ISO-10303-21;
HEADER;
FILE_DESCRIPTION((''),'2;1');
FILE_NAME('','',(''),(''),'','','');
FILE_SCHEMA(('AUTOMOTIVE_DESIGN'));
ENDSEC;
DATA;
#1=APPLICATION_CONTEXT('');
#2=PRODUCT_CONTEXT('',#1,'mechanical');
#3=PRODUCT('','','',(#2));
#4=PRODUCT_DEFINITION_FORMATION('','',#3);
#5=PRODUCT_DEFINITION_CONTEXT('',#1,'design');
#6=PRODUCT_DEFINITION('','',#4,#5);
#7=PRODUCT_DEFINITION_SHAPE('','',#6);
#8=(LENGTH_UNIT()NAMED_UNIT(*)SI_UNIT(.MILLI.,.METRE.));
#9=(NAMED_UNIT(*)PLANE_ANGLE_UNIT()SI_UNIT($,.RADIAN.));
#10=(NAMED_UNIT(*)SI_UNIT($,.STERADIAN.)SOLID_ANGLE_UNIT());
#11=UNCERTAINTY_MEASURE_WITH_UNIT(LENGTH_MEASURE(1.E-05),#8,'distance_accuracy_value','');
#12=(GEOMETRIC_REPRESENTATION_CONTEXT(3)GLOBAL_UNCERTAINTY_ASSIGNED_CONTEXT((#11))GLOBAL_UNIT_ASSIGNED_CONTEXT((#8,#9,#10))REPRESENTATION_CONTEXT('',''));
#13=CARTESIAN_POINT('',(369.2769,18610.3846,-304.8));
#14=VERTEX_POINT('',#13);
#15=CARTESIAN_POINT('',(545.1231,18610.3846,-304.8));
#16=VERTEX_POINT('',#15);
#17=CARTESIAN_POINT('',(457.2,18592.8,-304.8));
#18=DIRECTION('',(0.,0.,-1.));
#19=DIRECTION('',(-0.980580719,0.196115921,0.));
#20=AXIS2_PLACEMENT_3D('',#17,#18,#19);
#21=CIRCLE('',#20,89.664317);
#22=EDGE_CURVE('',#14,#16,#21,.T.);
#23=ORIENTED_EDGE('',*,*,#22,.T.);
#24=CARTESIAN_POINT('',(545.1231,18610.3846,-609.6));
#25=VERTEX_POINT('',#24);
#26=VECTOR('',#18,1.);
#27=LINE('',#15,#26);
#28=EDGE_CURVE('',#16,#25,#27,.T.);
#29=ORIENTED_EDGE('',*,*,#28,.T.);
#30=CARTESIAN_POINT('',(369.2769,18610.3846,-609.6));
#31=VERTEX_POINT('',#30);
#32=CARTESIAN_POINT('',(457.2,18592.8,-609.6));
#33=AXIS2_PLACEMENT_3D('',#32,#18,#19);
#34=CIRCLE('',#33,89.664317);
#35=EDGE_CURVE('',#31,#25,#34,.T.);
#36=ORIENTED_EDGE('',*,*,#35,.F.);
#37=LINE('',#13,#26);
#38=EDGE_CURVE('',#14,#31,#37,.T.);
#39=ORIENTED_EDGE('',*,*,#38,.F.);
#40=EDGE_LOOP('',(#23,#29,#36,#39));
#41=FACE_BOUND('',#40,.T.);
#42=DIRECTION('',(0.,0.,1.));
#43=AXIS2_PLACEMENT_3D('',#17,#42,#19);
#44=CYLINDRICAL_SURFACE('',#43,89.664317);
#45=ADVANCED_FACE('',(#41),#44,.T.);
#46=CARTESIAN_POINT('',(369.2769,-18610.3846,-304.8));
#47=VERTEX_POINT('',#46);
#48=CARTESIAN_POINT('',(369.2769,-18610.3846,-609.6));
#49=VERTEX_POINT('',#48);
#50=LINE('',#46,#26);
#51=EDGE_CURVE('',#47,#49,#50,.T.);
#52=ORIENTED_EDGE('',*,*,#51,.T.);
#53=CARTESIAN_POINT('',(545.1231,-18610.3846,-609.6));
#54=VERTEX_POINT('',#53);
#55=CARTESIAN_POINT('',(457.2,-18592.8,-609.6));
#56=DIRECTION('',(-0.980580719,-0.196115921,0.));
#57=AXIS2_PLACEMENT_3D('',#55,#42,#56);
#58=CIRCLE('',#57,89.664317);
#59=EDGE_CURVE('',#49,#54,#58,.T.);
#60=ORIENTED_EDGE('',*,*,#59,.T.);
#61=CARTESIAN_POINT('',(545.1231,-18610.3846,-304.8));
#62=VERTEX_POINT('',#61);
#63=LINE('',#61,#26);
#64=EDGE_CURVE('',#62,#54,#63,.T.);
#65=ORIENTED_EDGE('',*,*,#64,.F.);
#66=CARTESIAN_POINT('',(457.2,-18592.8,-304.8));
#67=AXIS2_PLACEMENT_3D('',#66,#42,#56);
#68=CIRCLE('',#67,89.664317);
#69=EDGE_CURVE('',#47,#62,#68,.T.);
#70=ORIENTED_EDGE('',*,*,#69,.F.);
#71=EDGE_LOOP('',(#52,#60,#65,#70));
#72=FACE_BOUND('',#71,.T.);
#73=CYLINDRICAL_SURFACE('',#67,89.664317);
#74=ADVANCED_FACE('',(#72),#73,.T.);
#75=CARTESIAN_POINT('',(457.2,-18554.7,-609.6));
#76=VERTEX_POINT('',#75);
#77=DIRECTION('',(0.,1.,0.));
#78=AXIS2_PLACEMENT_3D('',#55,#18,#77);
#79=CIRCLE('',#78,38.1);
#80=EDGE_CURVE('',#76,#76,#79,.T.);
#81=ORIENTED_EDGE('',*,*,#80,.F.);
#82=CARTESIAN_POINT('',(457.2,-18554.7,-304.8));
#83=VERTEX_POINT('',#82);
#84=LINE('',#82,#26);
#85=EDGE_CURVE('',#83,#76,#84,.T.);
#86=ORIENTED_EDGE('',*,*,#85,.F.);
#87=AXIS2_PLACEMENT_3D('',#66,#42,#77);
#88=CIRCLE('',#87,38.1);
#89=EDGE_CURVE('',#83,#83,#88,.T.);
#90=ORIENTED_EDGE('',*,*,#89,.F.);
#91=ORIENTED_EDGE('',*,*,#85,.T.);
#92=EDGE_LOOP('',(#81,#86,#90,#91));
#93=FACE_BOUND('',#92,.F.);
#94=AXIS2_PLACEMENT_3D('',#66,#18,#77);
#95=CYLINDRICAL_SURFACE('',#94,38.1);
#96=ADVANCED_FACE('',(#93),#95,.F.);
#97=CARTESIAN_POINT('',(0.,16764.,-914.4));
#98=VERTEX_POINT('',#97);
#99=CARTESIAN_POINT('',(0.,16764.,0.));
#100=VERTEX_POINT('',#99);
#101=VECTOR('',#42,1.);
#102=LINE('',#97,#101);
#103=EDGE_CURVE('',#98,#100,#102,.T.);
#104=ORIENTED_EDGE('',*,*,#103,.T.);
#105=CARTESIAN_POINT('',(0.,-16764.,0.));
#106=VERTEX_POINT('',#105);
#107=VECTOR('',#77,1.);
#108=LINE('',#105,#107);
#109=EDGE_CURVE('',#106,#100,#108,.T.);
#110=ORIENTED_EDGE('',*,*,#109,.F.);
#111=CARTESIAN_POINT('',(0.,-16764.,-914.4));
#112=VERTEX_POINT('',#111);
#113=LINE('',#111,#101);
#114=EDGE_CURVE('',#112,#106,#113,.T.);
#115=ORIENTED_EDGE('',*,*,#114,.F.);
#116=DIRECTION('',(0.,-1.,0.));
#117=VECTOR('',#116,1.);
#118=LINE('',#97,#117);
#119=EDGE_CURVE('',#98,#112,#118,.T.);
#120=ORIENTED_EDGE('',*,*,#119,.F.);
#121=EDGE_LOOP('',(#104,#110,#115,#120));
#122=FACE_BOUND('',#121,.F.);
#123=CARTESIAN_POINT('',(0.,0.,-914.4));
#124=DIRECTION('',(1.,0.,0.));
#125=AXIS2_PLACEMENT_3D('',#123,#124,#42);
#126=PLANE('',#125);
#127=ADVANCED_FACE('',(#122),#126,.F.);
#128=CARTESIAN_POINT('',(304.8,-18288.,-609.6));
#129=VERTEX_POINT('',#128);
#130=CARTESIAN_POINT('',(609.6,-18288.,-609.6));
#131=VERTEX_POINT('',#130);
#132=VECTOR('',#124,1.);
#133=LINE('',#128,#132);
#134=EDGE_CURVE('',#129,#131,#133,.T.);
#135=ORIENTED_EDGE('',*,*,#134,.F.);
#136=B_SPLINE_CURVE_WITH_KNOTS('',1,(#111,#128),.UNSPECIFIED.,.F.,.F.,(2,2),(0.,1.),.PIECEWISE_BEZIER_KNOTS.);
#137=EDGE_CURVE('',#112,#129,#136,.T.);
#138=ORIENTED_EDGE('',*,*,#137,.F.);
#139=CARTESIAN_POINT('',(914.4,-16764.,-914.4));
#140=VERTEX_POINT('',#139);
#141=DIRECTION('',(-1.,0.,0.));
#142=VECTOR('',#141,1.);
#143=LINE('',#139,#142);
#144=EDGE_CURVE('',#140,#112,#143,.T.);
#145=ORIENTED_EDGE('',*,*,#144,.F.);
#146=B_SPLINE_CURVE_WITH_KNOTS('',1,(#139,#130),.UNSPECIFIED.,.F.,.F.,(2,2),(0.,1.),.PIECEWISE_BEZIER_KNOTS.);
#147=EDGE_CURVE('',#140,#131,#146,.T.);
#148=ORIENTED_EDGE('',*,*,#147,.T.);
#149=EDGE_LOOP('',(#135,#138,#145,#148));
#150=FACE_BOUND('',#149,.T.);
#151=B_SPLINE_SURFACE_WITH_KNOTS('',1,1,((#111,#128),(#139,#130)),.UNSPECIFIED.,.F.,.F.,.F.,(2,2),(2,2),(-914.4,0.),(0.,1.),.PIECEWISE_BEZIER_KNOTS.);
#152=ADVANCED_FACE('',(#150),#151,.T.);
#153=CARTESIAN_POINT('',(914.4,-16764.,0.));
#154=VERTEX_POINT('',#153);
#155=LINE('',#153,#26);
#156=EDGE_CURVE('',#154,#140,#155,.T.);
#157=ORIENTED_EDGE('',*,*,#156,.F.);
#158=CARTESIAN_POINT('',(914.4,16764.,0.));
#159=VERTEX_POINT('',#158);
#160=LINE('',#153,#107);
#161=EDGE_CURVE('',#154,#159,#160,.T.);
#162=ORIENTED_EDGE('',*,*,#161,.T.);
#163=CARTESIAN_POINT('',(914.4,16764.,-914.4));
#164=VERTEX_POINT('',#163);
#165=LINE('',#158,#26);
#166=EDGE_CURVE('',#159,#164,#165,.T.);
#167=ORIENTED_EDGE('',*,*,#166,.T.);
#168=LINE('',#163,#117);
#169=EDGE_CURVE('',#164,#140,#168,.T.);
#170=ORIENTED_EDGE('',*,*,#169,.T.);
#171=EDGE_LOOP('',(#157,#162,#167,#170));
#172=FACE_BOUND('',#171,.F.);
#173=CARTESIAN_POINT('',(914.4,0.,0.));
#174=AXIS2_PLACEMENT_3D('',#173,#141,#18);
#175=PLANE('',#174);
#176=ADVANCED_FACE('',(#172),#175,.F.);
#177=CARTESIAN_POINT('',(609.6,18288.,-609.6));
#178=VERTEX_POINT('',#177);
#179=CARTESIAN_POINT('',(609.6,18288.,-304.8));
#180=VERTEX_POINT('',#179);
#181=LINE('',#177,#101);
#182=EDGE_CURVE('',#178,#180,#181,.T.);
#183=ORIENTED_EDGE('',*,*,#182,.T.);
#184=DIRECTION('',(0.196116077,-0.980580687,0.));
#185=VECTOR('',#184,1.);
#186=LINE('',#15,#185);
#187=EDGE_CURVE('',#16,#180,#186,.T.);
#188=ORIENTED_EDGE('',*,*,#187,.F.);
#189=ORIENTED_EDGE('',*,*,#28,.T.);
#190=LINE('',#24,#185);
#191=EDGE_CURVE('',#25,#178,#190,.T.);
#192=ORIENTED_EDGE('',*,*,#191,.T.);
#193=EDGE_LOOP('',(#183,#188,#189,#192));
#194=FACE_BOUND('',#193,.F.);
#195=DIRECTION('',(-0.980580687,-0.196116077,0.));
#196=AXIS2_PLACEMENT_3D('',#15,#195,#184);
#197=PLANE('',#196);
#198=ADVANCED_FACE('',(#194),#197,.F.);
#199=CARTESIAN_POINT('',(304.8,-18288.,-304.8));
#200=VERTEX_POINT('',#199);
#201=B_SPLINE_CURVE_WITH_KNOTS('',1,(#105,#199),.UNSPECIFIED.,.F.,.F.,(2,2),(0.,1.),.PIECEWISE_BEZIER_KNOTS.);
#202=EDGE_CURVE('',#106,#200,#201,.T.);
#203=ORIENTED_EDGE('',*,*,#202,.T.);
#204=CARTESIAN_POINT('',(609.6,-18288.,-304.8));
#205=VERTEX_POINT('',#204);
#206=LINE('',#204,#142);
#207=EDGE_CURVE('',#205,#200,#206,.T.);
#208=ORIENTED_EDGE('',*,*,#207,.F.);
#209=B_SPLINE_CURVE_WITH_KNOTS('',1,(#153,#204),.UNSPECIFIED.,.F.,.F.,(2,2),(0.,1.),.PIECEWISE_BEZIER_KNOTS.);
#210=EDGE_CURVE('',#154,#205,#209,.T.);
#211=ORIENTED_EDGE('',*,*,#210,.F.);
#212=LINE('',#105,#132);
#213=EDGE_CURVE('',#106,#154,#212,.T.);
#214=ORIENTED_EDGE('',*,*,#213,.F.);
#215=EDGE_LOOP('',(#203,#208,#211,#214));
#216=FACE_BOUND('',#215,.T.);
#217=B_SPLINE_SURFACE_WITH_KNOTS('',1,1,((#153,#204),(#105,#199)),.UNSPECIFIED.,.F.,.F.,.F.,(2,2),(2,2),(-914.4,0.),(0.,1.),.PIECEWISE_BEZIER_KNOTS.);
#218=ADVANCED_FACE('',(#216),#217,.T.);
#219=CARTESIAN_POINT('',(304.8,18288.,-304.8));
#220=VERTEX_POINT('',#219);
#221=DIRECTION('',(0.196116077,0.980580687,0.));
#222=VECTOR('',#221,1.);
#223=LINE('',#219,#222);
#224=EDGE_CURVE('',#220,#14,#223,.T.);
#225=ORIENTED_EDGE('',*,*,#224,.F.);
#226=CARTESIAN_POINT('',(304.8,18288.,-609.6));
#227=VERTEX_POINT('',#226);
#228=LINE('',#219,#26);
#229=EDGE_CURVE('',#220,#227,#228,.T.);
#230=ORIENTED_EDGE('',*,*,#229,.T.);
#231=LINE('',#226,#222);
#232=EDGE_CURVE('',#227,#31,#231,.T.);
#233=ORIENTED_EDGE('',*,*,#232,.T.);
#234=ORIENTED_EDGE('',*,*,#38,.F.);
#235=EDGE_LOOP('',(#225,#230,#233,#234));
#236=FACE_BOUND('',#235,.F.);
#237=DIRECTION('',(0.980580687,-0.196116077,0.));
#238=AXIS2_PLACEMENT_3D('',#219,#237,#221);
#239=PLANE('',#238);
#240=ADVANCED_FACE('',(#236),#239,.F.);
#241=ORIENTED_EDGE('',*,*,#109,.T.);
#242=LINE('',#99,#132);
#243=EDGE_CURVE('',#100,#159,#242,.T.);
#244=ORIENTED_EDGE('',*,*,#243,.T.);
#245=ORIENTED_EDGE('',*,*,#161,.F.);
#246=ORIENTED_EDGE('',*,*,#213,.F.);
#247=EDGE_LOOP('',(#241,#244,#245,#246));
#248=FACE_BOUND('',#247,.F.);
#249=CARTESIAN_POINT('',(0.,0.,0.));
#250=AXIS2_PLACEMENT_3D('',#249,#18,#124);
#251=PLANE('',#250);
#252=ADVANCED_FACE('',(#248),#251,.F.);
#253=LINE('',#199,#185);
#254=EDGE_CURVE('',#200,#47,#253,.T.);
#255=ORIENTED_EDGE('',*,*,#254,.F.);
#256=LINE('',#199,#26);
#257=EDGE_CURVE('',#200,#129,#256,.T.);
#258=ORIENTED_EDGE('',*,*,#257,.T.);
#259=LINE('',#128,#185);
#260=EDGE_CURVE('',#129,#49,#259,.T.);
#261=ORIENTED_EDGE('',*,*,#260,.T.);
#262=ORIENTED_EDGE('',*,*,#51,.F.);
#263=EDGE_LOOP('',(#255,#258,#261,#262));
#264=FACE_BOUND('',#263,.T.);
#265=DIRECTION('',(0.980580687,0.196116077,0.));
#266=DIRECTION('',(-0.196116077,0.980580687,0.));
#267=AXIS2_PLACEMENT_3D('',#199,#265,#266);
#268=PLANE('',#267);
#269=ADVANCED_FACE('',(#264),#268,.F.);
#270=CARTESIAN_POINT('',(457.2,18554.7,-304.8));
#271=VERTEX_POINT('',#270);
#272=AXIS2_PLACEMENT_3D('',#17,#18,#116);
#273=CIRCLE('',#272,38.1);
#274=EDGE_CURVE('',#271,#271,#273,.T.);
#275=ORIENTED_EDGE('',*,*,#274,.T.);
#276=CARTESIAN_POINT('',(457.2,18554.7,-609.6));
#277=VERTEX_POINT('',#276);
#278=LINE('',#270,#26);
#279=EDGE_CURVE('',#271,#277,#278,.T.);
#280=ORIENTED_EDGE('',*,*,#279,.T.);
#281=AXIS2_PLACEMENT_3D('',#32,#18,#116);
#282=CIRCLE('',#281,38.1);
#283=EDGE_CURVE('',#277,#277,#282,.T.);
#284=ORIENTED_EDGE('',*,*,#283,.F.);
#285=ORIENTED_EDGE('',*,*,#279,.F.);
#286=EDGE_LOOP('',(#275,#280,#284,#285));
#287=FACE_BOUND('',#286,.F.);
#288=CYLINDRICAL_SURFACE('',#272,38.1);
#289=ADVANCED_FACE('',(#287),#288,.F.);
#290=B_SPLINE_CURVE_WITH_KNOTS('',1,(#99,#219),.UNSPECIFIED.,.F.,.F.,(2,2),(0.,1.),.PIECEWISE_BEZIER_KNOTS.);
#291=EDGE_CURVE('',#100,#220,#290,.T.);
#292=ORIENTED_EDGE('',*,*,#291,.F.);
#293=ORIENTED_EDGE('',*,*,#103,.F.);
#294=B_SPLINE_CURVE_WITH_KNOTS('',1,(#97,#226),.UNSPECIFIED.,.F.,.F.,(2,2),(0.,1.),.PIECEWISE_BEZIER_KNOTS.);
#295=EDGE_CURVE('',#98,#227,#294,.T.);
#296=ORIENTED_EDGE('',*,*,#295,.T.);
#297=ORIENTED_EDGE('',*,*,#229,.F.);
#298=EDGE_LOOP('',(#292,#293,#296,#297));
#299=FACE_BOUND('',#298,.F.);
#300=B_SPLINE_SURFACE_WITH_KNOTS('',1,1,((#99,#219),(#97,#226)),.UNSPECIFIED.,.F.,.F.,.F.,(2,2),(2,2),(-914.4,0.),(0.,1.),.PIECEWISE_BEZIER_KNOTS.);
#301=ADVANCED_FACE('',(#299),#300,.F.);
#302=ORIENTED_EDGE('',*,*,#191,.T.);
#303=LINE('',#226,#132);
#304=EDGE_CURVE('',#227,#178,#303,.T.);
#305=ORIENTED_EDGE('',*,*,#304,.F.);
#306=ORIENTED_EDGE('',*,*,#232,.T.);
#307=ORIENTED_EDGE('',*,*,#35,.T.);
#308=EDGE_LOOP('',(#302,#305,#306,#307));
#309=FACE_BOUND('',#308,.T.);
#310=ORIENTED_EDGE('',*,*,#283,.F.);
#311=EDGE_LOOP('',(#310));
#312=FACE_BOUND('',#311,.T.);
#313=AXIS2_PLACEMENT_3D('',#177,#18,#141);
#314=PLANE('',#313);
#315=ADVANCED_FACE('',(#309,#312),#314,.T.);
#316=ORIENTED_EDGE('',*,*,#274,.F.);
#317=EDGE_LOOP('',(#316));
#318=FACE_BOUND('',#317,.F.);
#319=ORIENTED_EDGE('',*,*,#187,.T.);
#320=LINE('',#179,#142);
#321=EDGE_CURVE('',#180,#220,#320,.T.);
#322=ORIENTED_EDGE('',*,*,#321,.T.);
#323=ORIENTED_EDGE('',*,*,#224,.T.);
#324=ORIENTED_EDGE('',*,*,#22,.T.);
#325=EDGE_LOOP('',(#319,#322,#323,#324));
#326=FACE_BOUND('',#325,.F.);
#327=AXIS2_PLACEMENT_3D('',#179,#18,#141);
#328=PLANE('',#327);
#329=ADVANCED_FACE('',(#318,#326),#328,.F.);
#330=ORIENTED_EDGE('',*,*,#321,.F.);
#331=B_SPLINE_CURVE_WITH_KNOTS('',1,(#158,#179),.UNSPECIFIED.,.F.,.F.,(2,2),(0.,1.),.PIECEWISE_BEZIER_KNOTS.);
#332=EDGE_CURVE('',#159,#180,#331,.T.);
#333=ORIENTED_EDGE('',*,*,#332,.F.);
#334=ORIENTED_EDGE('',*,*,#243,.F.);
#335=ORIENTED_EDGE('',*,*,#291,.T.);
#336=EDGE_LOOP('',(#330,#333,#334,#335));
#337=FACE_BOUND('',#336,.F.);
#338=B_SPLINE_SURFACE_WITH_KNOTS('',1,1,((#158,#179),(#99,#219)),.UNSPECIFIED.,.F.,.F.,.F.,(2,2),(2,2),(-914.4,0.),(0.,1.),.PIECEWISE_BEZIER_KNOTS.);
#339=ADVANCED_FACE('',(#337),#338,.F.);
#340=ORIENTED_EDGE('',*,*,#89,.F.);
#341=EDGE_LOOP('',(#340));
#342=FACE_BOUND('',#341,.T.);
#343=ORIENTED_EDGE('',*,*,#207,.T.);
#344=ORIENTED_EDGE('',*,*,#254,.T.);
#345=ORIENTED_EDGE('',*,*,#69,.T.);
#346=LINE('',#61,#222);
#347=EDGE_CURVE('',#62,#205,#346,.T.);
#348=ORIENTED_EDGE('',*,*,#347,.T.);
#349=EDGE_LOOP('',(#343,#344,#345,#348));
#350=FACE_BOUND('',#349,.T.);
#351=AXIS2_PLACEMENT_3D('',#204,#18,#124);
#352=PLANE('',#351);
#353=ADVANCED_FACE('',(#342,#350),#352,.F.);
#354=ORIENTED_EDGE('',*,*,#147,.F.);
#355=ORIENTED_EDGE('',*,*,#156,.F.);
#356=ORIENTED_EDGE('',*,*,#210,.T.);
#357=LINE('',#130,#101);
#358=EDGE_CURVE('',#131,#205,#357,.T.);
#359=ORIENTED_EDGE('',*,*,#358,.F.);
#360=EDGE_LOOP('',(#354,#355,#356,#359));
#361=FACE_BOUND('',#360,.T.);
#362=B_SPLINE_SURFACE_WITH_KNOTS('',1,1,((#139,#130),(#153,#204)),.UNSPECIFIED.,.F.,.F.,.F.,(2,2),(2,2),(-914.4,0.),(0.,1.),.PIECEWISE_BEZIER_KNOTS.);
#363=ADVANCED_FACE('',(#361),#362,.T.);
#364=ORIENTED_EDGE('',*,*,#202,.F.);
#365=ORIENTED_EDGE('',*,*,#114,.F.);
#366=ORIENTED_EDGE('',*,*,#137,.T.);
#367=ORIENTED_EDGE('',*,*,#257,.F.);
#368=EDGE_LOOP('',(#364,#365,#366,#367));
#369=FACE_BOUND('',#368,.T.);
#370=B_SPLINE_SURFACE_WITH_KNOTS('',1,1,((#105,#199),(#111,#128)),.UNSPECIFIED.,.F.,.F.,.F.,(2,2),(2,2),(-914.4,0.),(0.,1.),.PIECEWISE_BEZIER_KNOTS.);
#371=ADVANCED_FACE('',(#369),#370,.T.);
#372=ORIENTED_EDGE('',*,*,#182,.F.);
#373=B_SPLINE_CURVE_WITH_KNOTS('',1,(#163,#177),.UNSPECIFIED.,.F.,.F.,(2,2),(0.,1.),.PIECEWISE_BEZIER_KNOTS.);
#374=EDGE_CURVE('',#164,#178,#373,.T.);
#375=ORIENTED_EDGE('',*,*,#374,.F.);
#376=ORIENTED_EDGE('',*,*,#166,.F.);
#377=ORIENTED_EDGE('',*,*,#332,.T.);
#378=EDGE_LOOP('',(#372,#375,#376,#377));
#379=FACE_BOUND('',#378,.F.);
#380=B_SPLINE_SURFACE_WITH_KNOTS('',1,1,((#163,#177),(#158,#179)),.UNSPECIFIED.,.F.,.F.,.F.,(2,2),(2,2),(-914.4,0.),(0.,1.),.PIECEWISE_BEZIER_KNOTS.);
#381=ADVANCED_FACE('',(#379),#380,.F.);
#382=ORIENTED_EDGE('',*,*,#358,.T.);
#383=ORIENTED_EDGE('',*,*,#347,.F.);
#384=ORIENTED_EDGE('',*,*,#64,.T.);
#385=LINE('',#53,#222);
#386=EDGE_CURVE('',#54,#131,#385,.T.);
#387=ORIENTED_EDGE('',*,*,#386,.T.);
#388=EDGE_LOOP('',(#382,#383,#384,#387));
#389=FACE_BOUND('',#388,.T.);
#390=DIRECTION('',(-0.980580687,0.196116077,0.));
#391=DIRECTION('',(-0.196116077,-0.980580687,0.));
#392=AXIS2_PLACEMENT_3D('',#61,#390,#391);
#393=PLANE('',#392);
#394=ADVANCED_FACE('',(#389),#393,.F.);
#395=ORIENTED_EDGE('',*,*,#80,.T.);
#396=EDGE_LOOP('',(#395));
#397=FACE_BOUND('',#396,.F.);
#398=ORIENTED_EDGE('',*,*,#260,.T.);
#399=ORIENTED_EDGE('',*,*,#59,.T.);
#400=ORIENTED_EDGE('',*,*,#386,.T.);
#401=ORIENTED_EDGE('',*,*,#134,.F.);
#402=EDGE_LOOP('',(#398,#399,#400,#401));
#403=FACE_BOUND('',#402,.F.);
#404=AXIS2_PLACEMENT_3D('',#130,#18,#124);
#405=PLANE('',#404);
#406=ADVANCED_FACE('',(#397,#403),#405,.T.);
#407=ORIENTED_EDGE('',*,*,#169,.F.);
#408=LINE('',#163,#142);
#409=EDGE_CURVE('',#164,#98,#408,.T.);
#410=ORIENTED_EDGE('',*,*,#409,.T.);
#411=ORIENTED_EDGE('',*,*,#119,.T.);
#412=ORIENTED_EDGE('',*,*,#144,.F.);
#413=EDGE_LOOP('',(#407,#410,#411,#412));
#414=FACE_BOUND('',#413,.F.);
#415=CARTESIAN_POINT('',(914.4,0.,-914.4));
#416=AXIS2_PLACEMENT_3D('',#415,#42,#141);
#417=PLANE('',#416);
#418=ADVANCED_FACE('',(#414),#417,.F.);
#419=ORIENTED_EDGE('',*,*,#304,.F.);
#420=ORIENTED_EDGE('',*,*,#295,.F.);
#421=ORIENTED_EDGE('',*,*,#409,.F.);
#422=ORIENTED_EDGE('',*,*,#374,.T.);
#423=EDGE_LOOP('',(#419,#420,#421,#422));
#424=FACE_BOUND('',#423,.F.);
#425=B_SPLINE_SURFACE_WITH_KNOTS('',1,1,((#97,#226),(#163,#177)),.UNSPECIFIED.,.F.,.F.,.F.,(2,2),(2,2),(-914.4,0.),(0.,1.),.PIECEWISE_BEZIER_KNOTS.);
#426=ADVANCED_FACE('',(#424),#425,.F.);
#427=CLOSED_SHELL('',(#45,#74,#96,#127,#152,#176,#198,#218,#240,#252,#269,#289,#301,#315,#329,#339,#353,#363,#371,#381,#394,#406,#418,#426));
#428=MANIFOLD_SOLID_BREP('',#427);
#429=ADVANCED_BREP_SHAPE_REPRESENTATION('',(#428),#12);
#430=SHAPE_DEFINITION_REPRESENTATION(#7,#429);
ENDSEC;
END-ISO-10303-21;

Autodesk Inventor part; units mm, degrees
ref_plane "YZ Plane" through (0, 0, 0) normal (1, 0, 0) x (0, 1, 0)
sketch "Sketch5" plane through (0, 0, 0) normal (0, 1, 0) x (-1, 0, 0)
  line L0 (0, 0) -> (-914.4, 0)
  line L1 (-914.4, 0) -> (-914.4, -914.4)
  line L2 (-914.4, -914.4) -> (0, -914.4)
  line L3 (0, -914.4) -> (0, 0)
  dimension "d26" = 914.4
  dimension "d27" = 914.4
extrude "Extrusion3" add sketch "Sketch5" along normal mid plane 33528
ref_plane "Work Plane4" through (0, 18288, 0) normal (0, 1, 0) x (1, 0, 0)
sketch "Sketch6" plane through (0, 18288, 0) normal (0, 1, 0) x (1, 0, 0)
  line L0 (609.6, 304.8) -> (304.8, 304.8)
  line L1 (304.8, 304.8) -> (304.8, 609.6)
  line L2 (304.8, 609.6) -> (609.6, 609.6)
  line L3 (609.6, 609.6) -> (609.6, 304.8)
  line L4 (914.4, 914.4) -> (0, 914.4) projected
  line L5 (914.4, 0) -> (914.4, 914.4) projected
  point P0 (0, 0)
  dimension "d31" = 304.8
  dimension "d32" = 304.8
  dimension "d33" = 304.8
  dimension "d34" = 304.8
loft "Loft3" add profiles "Sketch6" section 1 edges at (457.2, 16764, 0) (914.4, 16764, -457.2) (457.2, 16764, -914.4) (0, 16764, -457.2)
ref_plane "Work Plane5" through (609.6, 18288, -304.8) normal (0, 0, -1) x (-1, 0, 0)
sketch "Sketch7" plane through (609.6, 18288, -304.8) normal (0, 0, -1) x (-1, 0, 0)
  line L0 (609.6, -1524) -> (304.8, 0) projected
  line L1 (0, 0) -> (304.8, 0) projected
  line L2 (-304.8, -1524) -> (0, 0) projected
  line L3 (304.8, 0) -> (0, 0) projected
  line L4 (304.8, 0) -> (240.3231, 322.3846)
  arc A0 (240.3231, 322.3846) -> (64.4769, 322.3846) centre (152.4, 304.8) ccw
  line L5 (-304.8, -1524) -> (0, 0) projected
  line L6 (64.4769, 322.3846) -> (0, 0)
  point P0 (609.6, -18288)
  dimension "d40" = 304.8
extrude "Extrusion4" add sketch "Sketch7" along normal up to surface (304.8 mm away)
hole "Hole1" at (457.2, 18592.8, -304.8) direction (0, 0, -1) diameter 76.2 end through all
mirror "Mirror1" about plane through (0, 0, 0) normal (0, 1, 0) of "Loft3", "Extrusion4", "Hole1"
ref_plane "Work Plane6" through (0, -18288, 0) normal (0, 1, 0) x (1, 0, 0)
ref_plane "Work Plane7" through (609.6, -18288, -304.8) normal (0, 0, 1) x (-1, 0, 0)
properties part number "MM Support A" material "Iron, Malleable"
